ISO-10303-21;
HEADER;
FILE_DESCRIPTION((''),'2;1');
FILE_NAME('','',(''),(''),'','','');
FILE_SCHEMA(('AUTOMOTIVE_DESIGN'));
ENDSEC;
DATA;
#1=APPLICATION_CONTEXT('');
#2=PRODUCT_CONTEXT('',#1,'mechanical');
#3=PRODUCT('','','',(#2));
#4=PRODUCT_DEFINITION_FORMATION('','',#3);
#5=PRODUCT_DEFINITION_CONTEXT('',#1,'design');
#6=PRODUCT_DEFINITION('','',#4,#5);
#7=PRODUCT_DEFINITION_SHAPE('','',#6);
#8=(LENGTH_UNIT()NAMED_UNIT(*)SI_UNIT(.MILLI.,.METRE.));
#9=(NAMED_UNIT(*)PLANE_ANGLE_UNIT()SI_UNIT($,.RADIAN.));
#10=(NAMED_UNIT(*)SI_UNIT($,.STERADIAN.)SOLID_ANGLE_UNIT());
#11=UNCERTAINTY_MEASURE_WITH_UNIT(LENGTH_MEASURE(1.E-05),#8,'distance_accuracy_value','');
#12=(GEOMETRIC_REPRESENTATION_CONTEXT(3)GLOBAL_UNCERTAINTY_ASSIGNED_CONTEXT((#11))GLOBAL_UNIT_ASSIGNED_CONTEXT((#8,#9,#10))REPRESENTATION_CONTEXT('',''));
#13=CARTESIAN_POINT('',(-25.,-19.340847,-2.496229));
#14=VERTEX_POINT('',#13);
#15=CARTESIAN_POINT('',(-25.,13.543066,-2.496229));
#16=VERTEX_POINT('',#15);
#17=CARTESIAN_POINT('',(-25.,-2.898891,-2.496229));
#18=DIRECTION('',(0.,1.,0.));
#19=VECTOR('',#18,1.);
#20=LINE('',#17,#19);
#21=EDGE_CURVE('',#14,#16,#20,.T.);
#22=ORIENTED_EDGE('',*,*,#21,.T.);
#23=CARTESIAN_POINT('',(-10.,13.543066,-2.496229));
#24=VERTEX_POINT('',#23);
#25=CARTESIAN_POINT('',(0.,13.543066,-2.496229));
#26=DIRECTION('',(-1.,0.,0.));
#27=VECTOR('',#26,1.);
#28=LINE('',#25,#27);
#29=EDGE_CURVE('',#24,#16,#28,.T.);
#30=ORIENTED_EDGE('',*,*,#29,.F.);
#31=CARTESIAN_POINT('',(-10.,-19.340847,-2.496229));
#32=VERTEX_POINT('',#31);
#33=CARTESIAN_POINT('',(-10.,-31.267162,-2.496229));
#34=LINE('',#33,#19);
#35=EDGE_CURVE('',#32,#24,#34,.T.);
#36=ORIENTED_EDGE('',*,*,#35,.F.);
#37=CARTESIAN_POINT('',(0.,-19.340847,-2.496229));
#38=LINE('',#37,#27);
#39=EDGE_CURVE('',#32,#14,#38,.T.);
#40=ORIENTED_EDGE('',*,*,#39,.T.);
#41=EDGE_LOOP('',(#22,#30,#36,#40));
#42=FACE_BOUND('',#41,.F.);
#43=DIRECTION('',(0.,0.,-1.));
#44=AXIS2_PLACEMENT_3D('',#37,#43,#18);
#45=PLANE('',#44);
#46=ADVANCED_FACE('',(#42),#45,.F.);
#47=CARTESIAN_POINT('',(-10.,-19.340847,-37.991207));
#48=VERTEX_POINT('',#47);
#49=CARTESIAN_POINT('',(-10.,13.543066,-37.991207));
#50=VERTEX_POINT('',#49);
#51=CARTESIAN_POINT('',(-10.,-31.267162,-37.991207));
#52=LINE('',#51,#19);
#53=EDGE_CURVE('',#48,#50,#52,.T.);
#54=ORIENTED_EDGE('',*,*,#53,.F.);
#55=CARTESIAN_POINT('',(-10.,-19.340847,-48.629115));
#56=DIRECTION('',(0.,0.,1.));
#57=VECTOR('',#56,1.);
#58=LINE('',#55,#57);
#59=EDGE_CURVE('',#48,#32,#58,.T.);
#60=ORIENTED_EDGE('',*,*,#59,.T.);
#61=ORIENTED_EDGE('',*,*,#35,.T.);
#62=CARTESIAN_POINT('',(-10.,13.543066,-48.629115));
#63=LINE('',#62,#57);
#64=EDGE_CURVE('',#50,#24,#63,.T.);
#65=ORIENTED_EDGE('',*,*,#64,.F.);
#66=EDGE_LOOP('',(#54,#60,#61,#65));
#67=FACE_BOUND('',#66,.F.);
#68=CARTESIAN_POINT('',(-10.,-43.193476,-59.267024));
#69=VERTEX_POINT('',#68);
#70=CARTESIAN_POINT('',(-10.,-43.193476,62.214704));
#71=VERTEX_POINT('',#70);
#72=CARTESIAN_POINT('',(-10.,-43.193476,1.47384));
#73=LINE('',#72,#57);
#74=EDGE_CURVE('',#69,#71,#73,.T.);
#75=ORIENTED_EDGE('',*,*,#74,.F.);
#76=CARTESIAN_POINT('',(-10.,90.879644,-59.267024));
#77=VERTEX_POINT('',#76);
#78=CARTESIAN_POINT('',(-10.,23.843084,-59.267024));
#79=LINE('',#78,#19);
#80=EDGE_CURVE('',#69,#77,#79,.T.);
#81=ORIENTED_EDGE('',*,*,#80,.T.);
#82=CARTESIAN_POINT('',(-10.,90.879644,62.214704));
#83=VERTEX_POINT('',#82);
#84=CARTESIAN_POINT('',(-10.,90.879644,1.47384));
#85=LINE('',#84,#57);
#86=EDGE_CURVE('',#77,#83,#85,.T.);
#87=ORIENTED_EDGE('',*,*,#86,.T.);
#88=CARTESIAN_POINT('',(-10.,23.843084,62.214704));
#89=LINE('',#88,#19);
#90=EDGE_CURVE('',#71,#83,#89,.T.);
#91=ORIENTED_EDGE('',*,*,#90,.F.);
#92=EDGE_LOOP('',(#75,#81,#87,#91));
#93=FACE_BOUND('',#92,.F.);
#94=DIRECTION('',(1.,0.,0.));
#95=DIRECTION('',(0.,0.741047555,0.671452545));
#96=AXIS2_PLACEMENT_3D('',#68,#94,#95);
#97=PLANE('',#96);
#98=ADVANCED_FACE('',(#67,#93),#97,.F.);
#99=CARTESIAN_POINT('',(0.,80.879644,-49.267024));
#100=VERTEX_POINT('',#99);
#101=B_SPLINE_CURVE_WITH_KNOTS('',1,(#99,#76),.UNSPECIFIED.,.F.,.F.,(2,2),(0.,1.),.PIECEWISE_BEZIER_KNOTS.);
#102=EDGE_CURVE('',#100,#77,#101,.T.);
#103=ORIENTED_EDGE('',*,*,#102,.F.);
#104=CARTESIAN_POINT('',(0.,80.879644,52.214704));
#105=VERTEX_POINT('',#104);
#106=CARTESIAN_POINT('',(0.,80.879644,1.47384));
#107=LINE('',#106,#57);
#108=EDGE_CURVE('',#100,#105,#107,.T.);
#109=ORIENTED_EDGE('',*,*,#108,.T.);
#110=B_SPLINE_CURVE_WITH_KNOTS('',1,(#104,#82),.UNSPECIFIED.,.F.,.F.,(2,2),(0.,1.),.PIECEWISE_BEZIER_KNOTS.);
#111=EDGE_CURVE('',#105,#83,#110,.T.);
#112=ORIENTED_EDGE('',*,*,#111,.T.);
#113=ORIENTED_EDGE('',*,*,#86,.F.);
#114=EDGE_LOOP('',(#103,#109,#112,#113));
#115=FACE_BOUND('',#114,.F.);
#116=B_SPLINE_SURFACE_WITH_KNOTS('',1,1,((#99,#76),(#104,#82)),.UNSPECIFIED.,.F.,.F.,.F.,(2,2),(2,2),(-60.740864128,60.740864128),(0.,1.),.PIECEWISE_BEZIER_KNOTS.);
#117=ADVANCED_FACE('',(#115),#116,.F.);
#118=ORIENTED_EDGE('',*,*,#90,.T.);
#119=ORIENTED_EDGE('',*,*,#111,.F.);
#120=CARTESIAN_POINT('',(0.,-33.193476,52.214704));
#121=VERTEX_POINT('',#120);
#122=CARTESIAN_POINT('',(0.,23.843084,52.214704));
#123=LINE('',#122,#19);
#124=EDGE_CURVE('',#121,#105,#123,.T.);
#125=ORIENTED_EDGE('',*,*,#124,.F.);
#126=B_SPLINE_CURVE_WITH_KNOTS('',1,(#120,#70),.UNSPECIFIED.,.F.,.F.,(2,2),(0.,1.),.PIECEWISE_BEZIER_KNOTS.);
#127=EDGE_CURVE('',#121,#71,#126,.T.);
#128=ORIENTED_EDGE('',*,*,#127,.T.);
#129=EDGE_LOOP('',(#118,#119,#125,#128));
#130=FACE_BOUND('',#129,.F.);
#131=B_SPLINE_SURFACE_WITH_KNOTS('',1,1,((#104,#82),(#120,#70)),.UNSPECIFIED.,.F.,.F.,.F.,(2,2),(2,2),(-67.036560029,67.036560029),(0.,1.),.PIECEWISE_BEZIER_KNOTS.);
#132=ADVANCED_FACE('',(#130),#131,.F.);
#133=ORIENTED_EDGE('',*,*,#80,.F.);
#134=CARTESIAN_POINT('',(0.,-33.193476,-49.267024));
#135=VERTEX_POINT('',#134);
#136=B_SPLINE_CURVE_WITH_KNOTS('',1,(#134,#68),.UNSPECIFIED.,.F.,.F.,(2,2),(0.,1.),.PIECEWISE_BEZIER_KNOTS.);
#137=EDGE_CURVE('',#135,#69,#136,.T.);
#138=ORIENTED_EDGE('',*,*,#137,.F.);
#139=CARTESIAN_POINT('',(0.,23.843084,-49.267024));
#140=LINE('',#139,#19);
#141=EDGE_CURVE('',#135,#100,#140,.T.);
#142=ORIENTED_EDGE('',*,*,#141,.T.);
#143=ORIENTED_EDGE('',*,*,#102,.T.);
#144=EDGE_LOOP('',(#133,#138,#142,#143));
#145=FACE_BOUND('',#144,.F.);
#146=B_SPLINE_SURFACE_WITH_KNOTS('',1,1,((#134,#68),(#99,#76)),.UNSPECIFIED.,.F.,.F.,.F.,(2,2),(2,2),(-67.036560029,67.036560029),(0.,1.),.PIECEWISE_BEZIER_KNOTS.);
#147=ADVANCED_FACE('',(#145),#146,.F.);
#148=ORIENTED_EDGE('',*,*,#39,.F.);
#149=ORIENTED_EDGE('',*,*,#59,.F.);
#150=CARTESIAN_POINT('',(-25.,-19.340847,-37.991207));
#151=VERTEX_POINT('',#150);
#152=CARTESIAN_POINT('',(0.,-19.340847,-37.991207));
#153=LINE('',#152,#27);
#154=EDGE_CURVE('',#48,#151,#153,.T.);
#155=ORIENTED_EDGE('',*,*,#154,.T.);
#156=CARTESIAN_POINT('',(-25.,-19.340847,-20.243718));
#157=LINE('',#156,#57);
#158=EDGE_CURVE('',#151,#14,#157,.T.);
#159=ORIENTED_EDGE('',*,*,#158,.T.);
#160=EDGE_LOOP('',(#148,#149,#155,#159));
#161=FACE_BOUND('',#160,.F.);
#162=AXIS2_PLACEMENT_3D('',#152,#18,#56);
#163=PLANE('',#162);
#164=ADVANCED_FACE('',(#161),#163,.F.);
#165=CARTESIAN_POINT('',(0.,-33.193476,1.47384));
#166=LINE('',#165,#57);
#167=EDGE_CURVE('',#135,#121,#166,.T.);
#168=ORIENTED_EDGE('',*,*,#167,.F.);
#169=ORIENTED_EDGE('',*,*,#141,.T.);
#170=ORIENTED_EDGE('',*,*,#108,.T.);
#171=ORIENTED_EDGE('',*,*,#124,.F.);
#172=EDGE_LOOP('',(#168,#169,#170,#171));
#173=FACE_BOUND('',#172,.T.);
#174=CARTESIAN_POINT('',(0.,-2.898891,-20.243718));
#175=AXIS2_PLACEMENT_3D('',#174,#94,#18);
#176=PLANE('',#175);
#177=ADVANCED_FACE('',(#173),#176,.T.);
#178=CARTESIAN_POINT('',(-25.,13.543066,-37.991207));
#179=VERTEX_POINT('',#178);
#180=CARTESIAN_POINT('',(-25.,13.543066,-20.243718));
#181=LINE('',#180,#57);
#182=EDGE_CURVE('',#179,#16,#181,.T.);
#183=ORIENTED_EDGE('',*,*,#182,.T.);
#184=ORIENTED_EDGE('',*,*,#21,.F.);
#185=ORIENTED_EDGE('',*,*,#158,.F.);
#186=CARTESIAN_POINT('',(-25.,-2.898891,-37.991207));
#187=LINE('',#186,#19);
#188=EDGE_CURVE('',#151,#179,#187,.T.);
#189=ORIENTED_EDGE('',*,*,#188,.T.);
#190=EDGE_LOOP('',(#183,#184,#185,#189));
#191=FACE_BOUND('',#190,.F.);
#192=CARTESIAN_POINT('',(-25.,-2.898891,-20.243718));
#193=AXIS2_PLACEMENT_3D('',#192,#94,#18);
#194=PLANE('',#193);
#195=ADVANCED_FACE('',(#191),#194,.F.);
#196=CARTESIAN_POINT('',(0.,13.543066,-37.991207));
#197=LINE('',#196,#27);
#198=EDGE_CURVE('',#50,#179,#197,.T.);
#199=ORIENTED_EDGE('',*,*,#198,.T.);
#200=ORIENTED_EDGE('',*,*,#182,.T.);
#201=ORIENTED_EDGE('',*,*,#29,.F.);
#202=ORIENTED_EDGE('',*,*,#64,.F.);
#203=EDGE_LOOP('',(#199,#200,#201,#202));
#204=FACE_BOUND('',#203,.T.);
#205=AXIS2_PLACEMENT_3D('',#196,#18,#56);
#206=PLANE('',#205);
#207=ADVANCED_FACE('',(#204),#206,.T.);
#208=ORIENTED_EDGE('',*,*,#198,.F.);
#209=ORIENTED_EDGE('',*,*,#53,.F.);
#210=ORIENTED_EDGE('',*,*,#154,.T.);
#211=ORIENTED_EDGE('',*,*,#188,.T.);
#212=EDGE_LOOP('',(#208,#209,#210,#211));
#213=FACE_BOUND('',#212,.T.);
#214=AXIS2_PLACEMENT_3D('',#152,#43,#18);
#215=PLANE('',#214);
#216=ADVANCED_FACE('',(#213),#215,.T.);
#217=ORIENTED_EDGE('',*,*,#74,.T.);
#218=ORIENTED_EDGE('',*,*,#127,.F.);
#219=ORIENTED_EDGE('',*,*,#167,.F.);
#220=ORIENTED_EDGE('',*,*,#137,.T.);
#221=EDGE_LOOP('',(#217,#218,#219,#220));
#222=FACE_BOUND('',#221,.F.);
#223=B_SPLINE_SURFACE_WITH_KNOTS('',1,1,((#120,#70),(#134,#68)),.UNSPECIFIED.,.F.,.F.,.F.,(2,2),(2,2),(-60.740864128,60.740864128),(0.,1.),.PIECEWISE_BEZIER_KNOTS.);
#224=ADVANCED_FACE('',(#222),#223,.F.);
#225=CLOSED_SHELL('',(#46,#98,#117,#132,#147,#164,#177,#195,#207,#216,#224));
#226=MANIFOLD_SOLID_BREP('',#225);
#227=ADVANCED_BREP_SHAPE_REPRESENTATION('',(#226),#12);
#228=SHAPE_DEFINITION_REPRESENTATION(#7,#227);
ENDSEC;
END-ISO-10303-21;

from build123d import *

# Parameters (mm, degrees)
F0_W     = 114.0731200576
F0_H     = 101.4817282557
F1_DEPTH = 10
F1_TAPER = -45
F2_W     = 32.8839123249
F2_H     = 35.4949785396
F3_DEPTH = 25


with BuildPart() as f1:
    # F0 (on Right) → F1 (new body)
    with BuildSketch(Plane.YZ):
        with Locations((23.8430835307, 1.4738403261)):
            Rectangle(F0_W, F0_H)
    extrude(amount=-F1_DEPTH, taper=F1_TAPER)

    # F2 (on face) → F3 (join)
    with BuildSketch(Plane.YZ):
        with Locations((-2.8988905251, -20.2437178232)):
            Rectangle(F2_W, F2_H)
    extrude(amount=-F3_DEPTH)


solid = f1.part
